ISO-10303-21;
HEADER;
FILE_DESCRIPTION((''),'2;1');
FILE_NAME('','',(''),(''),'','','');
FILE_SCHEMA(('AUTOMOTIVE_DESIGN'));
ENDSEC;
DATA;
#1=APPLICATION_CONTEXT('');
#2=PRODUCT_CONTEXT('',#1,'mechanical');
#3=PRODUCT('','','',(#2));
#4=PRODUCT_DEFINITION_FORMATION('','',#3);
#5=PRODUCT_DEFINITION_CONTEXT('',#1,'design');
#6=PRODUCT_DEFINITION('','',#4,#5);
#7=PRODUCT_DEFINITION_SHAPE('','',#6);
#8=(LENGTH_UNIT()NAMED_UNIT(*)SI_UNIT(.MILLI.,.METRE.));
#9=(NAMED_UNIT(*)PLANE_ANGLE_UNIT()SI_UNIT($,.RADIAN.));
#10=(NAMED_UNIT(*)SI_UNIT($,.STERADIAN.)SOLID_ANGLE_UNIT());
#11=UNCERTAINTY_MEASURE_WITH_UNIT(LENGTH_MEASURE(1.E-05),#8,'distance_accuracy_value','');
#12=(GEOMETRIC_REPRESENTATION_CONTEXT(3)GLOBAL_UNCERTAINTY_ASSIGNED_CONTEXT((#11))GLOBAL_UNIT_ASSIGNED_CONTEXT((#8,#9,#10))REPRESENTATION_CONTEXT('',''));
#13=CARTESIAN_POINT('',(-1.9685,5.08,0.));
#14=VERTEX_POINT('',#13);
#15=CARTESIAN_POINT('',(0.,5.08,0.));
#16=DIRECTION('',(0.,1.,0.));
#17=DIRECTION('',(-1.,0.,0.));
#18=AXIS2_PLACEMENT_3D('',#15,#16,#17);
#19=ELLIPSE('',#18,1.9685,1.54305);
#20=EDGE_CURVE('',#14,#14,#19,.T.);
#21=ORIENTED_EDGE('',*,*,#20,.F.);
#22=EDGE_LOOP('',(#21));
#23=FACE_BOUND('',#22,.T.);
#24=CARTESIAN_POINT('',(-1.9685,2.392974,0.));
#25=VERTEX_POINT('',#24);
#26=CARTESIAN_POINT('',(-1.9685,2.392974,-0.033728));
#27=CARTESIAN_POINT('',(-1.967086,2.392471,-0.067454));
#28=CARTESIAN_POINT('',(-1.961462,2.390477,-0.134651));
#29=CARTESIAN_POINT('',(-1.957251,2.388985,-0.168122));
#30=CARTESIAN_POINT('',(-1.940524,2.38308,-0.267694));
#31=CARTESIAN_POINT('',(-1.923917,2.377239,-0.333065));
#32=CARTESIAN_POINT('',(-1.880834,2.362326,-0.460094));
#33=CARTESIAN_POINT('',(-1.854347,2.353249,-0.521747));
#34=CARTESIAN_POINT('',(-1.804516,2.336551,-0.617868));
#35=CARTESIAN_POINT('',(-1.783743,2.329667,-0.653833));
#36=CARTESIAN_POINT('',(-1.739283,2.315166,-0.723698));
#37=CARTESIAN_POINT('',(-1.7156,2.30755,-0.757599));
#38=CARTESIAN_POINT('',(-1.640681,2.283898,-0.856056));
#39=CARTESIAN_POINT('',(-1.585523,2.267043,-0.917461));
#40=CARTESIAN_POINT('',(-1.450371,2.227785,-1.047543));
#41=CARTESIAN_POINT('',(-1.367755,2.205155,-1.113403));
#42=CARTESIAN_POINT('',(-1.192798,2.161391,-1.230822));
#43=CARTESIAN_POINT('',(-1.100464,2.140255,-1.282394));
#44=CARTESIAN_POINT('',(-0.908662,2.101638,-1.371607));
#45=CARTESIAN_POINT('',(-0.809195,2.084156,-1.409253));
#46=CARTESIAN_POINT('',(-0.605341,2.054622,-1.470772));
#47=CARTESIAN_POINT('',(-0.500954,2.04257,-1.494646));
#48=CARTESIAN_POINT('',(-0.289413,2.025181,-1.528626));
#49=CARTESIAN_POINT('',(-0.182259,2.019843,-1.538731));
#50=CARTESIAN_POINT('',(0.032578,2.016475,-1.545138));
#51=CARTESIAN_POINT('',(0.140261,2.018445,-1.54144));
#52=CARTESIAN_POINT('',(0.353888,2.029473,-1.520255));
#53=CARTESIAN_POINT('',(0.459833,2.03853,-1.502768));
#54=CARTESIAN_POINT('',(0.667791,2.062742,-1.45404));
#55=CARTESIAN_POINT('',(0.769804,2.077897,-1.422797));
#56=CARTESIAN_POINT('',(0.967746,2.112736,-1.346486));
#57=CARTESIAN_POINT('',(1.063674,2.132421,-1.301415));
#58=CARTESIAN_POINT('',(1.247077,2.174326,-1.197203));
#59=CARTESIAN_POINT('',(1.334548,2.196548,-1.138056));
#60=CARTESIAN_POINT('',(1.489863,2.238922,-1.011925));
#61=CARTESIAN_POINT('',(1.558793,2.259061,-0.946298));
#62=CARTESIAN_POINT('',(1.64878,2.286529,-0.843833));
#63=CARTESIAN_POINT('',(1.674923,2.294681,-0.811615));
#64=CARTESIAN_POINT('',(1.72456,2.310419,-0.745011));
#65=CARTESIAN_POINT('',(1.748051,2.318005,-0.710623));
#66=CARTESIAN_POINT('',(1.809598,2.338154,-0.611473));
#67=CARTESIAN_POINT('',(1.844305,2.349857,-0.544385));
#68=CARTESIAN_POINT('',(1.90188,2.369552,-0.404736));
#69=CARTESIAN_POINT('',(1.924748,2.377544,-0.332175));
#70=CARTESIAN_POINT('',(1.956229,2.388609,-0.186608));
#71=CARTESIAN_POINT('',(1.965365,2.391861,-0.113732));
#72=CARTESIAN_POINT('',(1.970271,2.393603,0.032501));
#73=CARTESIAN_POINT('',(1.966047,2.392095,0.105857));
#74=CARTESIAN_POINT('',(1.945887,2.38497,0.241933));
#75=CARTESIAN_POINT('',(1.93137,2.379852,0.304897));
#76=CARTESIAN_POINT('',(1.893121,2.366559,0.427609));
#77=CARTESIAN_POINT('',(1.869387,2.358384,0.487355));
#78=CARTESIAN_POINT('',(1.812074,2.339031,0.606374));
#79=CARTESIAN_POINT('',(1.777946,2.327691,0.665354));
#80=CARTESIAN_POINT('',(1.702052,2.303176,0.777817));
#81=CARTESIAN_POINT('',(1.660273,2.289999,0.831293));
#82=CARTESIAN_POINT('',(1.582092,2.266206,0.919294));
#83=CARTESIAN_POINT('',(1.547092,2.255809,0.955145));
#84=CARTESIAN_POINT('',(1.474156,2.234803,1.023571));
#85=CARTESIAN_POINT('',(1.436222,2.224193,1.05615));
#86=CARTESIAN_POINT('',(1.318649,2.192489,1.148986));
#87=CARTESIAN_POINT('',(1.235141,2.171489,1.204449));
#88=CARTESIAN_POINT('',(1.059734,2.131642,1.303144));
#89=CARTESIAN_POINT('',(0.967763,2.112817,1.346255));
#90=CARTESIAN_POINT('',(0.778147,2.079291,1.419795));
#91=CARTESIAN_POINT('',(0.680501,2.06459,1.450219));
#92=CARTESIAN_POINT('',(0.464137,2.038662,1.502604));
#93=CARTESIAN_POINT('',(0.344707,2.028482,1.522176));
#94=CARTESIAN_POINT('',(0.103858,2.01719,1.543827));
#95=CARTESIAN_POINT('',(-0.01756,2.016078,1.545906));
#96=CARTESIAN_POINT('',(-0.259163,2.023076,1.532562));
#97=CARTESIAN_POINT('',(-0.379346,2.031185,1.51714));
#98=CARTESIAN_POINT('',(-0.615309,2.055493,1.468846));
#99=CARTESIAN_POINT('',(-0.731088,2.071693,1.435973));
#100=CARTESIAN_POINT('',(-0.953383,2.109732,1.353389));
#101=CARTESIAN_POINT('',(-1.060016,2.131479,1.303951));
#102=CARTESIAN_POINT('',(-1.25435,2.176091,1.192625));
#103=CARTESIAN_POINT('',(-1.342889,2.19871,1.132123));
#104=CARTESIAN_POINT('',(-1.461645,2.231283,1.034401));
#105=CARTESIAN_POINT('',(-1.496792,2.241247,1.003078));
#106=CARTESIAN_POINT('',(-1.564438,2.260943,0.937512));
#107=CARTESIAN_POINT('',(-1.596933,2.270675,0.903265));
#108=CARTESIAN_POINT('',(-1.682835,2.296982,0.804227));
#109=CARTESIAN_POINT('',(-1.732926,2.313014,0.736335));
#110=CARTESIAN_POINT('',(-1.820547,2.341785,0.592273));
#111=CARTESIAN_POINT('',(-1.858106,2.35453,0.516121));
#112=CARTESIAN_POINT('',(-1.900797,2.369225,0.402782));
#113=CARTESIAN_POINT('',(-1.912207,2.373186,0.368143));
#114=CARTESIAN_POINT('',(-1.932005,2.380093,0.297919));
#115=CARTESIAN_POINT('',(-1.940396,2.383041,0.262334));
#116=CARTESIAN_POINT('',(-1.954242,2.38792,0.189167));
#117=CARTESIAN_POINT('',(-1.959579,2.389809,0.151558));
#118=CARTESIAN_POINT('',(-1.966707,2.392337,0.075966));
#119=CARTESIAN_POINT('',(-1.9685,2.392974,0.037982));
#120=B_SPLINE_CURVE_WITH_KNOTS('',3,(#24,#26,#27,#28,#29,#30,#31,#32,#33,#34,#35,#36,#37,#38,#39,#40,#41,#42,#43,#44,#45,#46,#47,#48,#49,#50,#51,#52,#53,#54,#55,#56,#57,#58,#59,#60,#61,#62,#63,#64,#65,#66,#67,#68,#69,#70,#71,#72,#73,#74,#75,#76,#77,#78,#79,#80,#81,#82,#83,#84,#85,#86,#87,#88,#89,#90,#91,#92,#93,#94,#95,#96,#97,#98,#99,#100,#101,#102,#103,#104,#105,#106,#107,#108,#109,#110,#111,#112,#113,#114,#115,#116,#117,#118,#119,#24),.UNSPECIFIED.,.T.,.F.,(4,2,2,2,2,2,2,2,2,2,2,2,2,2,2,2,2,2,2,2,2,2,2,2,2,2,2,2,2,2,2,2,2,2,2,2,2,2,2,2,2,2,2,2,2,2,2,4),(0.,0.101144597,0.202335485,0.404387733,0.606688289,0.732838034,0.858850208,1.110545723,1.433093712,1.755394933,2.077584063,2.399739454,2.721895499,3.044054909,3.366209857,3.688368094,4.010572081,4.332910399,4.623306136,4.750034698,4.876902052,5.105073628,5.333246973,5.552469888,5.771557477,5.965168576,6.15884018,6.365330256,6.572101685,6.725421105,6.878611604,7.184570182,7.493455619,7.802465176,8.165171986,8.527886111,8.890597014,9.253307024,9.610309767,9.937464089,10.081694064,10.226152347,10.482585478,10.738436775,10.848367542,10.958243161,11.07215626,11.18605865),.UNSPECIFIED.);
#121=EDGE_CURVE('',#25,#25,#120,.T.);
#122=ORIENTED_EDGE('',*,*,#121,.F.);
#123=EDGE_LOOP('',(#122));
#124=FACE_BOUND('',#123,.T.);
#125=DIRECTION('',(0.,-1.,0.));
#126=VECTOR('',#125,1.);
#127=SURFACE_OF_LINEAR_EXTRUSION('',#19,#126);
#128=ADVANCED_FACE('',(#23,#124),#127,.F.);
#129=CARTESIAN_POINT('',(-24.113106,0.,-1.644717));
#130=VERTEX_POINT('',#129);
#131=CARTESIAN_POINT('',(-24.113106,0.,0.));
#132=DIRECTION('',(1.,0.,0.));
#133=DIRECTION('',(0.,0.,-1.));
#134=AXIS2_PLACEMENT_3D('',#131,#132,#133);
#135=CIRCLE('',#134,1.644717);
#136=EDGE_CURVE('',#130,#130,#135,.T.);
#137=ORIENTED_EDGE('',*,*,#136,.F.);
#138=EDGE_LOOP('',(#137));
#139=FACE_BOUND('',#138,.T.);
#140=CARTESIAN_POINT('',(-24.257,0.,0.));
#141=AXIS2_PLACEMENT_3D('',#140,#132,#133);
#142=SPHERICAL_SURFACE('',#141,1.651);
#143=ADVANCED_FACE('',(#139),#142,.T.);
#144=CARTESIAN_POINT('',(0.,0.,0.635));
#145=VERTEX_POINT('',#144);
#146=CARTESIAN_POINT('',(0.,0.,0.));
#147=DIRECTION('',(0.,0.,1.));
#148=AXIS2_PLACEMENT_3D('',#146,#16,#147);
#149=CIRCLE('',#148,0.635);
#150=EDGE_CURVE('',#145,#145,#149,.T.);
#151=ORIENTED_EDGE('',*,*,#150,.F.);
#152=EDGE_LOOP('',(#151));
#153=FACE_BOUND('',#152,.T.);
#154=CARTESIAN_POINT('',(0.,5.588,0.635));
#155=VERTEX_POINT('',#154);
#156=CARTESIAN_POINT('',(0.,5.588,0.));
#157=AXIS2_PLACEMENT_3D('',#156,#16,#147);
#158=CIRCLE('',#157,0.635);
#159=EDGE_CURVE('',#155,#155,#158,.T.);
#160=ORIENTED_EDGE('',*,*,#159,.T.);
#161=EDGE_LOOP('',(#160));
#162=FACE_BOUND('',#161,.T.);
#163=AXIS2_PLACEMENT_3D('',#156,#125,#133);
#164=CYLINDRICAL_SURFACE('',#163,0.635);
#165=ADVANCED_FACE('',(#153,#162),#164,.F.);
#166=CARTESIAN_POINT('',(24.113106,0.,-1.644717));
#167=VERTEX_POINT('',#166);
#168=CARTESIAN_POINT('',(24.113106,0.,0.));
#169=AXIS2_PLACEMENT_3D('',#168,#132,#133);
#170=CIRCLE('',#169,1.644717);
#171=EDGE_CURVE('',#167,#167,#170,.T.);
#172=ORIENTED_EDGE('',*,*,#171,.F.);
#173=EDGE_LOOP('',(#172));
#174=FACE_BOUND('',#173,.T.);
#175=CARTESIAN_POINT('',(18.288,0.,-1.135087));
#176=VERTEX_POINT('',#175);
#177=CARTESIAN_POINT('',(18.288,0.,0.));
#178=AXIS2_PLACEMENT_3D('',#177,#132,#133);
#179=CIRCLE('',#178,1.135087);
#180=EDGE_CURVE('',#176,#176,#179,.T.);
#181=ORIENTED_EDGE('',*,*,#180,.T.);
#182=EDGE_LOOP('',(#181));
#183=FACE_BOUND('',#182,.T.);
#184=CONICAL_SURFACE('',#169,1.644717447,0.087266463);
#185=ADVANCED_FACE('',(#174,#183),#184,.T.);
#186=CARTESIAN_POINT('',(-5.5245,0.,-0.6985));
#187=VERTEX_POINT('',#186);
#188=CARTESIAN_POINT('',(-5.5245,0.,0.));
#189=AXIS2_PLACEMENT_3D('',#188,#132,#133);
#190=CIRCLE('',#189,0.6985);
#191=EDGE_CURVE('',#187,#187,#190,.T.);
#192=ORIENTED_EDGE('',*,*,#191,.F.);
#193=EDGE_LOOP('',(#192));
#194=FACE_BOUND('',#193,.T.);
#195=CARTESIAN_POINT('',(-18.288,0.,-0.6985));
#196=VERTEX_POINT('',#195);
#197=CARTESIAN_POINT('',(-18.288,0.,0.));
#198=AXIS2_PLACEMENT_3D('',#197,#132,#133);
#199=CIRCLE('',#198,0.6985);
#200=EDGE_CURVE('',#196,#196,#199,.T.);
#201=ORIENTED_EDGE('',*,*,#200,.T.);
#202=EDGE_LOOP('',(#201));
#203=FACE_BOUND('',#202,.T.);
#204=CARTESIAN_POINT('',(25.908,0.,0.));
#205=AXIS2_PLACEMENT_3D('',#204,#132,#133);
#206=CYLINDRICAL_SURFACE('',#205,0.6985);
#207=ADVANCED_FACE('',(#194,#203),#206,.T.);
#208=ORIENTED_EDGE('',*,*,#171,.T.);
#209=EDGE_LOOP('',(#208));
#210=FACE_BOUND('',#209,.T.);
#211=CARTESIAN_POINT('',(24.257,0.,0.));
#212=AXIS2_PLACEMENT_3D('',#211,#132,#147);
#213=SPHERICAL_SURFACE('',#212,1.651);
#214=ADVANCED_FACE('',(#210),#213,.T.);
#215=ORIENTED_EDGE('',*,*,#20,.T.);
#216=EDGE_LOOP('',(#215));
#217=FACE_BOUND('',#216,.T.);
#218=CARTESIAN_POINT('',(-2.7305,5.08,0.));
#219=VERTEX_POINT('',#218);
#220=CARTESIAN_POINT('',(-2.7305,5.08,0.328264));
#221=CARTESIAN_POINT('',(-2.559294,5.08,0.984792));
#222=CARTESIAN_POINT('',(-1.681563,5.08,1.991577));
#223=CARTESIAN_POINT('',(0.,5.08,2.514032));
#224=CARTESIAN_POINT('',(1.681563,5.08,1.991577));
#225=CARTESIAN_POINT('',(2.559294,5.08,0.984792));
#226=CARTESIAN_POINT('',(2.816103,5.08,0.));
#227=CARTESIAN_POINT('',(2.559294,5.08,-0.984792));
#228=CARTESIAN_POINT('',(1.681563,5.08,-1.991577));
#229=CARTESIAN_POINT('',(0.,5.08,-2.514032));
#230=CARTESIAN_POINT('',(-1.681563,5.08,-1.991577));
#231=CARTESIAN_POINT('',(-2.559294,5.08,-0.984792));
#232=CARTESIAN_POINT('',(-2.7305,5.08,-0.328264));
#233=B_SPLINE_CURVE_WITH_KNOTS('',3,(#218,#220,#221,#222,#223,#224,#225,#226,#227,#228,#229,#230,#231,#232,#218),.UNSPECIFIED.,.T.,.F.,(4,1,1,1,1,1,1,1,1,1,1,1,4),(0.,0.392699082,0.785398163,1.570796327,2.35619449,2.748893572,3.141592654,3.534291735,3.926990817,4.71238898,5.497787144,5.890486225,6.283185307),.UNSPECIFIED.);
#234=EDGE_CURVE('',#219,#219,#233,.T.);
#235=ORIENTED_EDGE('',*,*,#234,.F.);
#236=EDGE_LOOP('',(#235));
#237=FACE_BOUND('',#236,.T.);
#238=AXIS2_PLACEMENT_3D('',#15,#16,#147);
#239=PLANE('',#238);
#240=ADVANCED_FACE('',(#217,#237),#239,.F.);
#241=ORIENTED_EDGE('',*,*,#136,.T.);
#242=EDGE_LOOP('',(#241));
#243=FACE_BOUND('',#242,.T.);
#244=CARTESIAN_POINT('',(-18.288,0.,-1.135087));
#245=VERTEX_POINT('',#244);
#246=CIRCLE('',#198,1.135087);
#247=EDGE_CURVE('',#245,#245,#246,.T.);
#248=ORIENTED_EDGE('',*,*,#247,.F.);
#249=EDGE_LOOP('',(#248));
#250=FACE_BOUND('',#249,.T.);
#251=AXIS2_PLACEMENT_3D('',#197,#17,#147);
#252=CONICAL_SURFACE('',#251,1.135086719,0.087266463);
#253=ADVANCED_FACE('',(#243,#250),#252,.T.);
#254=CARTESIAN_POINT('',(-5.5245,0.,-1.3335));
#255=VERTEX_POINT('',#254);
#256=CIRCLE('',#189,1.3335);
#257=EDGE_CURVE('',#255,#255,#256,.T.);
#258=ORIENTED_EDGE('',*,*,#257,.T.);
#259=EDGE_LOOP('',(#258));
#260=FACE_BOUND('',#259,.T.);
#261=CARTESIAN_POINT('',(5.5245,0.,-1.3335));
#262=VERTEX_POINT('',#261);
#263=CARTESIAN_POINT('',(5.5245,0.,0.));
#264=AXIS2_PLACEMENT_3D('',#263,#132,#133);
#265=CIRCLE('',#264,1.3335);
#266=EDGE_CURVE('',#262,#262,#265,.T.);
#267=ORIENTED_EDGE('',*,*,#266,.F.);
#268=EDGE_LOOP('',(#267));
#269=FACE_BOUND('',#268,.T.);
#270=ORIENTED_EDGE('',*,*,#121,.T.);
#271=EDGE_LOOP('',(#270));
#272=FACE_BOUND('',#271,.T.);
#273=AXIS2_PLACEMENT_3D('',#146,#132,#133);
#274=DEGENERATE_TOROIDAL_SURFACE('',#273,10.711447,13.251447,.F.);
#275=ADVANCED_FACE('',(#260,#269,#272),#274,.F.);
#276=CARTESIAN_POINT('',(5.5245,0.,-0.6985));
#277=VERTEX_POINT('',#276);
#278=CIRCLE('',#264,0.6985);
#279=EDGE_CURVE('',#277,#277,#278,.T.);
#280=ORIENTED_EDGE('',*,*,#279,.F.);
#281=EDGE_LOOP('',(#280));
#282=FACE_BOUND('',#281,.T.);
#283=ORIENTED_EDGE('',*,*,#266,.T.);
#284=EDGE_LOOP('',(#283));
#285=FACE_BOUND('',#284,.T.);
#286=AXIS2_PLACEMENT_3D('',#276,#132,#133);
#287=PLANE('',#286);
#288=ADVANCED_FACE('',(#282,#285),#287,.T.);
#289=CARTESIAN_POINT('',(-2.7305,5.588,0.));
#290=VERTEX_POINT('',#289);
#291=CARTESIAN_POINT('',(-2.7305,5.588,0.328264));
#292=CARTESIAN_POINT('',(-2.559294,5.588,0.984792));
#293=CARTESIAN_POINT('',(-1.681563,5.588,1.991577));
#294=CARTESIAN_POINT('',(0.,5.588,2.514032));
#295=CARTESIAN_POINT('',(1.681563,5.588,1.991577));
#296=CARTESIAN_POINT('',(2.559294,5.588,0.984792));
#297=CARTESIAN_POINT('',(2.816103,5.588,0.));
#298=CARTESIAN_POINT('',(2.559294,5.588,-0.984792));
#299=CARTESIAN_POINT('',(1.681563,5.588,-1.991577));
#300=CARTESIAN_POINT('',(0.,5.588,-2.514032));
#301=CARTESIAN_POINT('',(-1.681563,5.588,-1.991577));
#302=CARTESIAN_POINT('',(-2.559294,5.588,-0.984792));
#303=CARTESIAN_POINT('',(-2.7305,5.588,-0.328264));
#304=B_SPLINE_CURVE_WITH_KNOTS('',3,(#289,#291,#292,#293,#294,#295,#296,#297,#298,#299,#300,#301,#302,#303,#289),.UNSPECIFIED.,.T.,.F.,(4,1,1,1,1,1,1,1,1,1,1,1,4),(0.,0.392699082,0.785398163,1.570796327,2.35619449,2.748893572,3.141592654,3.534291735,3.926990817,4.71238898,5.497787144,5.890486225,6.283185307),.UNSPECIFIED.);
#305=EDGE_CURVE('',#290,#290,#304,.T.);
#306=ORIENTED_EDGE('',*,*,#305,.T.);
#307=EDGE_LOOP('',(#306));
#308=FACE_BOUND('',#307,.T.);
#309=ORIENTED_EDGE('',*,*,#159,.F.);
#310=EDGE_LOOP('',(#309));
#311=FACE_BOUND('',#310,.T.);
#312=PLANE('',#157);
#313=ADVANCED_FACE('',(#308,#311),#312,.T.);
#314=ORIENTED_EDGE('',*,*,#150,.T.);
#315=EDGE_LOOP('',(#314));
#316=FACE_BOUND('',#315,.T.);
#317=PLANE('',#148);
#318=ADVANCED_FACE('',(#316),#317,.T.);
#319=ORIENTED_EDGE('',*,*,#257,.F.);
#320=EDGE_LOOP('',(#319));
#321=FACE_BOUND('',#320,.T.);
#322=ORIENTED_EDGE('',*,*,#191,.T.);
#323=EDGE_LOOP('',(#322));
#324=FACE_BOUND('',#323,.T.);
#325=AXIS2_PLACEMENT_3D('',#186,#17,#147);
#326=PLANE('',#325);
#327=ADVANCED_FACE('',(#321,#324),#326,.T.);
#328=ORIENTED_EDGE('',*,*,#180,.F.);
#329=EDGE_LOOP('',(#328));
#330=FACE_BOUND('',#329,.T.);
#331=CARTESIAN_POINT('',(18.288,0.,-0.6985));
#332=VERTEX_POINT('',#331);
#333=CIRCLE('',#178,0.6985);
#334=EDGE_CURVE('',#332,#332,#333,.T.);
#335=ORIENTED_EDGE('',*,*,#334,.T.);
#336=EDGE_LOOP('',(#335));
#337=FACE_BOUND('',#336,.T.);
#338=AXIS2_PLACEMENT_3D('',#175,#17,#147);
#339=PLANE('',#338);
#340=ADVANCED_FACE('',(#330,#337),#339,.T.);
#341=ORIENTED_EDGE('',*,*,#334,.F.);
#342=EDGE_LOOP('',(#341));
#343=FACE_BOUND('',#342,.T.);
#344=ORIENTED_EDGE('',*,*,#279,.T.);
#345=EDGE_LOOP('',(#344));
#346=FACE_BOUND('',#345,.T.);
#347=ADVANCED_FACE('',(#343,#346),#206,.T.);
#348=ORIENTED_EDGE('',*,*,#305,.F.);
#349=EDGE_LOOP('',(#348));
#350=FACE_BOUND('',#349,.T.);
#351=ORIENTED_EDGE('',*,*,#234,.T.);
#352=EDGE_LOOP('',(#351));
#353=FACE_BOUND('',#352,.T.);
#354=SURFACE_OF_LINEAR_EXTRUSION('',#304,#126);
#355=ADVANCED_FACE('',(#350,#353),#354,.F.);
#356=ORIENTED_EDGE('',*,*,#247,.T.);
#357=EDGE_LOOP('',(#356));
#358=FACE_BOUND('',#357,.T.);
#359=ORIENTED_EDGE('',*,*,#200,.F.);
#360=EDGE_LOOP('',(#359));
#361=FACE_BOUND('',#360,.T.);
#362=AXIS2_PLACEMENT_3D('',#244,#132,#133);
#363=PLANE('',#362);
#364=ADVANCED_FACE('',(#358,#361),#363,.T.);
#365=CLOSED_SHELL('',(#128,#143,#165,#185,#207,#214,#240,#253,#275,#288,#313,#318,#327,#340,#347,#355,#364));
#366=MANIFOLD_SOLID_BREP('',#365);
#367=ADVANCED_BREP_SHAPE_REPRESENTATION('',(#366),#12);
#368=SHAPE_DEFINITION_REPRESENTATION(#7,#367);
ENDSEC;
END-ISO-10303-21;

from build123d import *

# Parameters (mm, degrees)
SKETCH4_RX          = 1.9685
SKETCH4_RY          = 1.54305
BOSS_EXTRUDE2_DEPTH = 5.08
BOSS_EXTRUDE3_DEPTH = 0.508
SKETCH6_R           = 0.635
CUT_EXTRUDE2_DEPTH  = 27.625210039


# Read off the part's stored shape, not the designer's step: Boss-Extrude3
with BuildPart() as part:
    # Sketch3 → Revolve1 (revolve)
    with BuildSketch(Plane(origin=(0, 0, 0), x_dir=(-1, 0, 0), z_dir=(0, 1, 0))):
        with BuildLine():
            Line((-25.908, 0), (25.908, 0))
            ThreePointArc((25.908, 0), (25.372399433, -1.217244883), (24.113105869, -1.644717447))
            Line((24.113105869, -1.644717447), (18.288, -1.135086719))
            Line((18.288, -1.135086719), (18.288, -0.6985))
            Line((18.288, -0.6985), (5.5245, -0.6985))
            Line((5.5245, -0.6985), (5.5245, -1.3335))
            ThreePointArc((5.5245, -1.3335), (0, -2.54), (-5.5245, -1.3335))
            Line((-5.5245, -1.3335), (-5.5245, -0.6985))
            Line((-5.5245, -0.6985), (-18.288, -0.6985))
            Line((-18.288, -0.6985), (-18.288, -1.135086719))
            Line((-18.288, -1.135086719), (-24.113105869, -1.644717447))
            ThreePointArc((-24.113105869, -1.644717447), (-25.372399433, -1.217244883), (-25.908, 0))
        make_face()
    revolve(axis=Axis((25.908, 0, 0), (-1, 0, 0)))

    # Sketch4 → Boss-Extrude2 (add)
    with BuildSketch(Plane(origin=(0, 0, 0), x_dir=(-1, 0, 0), z_dir=(0, 1, 0))):
        with Locations((0, 0)):
            Ellipse(SKETCH4_RX, SKETCH4_RY)
    extrude(amount=BOSS_EXTRUDE2_DEPTH)

    # Boss-Extrude3 outline → Boss-Extrude3 (add)
    with BuildSketch(Plane(origin=(0, 5.08, 0), x_dir=(-1, 0, 0), z_dir=(0, 1, 0))):
        with BuildLine():
            add(Edge.make_bspline(
                [(2.7305, 0), (2.7305, 0.328264155), (2.559294063, 0.984792465), (1.681563155, 1.991576732), (0, 2.514032178), (-1.681563155, 1.991576732), (-2.559294063, 0.984792465), (-2.816102969, 0), (-2.559294063, -0.984792465), (-1.681563155, -1.991576732), (0, -2.514032178), (1.681563155, -1.991576732), (2.559294063, -0.984792465), (2.7305, -0.328264155), (2.7305, 0)],
                knots=[0, 0, 0, 0, 0.392699082, 0.785398163, 1.570796327, 2.35619449, 2.748893572, 3.141592654, 3.534291735, 3.926990817, 4.71238898, 5.497787144, 5.890486225, 6.283185307, 6.283185307, 6.283185307, 6.283185307], degree=3))
        make_face()
    extrude(amount=BOSS_EXTRUDE3_DEPTH)

    # Sketch6 → Cut-Extrude2 (cut, through all)
    with BuildSketch(Plane(origin=(0, 0, 0), x_dir=(-1, 0, 0), z_dir=(0, 1, 0))):
        with Locations(Location((0, 0, 0), (0, 0, 90))):
            Circle(SKETCH6_R)
    extrude(amount=CUT_EXTRUDE2_DEPTH, mode=Mode.SUBTRACT)


solid = part.part
